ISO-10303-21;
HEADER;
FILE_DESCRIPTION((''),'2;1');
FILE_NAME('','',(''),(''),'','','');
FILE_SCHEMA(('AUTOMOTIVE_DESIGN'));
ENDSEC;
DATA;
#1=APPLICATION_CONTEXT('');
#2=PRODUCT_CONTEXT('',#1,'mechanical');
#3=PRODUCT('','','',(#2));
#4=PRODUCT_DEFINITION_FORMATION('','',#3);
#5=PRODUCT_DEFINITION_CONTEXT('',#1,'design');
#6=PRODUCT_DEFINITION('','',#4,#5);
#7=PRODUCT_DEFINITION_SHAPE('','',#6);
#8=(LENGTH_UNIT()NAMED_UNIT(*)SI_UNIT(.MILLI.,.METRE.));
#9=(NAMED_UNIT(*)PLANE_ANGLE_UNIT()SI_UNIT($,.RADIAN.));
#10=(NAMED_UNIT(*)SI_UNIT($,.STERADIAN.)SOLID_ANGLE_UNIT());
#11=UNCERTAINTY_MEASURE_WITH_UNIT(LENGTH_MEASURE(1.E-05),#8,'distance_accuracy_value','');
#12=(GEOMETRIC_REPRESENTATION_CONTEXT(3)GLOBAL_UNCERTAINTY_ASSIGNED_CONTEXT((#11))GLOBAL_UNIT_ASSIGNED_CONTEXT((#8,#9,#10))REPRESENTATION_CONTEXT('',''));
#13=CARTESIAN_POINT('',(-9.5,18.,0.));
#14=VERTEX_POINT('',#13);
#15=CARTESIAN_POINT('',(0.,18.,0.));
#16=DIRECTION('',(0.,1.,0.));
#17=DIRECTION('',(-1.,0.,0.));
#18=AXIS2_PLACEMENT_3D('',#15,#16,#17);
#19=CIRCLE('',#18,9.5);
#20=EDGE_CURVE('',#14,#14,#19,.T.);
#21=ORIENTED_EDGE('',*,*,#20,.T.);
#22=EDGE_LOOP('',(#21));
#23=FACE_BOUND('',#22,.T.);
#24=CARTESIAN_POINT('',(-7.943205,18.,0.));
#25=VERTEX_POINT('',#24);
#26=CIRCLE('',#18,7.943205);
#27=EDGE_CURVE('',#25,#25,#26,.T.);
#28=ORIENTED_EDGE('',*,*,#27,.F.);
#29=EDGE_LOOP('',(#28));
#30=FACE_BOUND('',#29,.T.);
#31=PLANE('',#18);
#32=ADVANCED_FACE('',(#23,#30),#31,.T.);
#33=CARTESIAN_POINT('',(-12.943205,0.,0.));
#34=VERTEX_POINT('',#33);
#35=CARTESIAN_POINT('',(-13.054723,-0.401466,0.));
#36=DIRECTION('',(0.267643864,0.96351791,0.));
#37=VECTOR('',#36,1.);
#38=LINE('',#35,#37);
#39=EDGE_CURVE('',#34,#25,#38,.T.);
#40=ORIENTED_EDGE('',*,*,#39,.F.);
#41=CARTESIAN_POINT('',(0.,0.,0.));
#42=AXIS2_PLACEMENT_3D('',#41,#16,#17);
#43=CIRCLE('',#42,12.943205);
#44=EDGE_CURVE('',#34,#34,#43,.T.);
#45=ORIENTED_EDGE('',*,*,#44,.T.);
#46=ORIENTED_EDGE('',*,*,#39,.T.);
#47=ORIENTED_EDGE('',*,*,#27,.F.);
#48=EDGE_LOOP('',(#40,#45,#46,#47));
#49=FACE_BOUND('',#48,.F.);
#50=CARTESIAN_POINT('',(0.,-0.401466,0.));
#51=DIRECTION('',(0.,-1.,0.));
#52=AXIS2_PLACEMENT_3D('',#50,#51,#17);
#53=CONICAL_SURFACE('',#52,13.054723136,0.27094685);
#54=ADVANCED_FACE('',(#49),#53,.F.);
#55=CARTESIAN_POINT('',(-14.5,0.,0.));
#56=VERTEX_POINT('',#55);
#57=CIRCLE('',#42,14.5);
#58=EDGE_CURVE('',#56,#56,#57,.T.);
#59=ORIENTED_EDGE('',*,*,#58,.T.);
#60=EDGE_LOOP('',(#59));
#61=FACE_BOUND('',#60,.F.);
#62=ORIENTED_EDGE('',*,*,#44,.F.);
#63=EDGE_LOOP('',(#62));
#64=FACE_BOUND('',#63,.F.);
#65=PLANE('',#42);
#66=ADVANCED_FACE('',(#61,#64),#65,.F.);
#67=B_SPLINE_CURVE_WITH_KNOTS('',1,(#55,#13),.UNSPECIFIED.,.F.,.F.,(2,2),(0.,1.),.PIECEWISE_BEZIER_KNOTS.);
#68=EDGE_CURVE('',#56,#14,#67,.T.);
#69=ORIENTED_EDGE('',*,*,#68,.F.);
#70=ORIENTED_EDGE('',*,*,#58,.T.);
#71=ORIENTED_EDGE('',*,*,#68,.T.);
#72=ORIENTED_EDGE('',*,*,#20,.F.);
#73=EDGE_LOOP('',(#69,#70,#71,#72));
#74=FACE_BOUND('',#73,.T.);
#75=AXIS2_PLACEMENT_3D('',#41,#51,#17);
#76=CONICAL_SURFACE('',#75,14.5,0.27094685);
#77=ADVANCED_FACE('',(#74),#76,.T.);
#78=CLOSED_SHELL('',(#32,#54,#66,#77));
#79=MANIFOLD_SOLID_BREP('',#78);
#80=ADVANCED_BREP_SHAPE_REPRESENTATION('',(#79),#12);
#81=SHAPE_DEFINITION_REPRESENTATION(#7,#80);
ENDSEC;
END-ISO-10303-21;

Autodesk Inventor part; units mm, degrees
ref_plane "YZ Plane" through (0, 0, 0) normal (1, 0, 0) x (0, 1, 0)
ref_plane "XY Plane" through (0, 0, 0) normal (0, 0, 1) x (1, 0, 0)
sketch "Szkic6" plane through (0, 0, 0) normal (0, 1, 0) x (-1, 0, 0)
  circle A0 centre (0, 0) radius 14.5
  dimension "d33" = 29
ref_plane "Płaszczyzna konstrukcyjna1" through (0, 18, 0) normal (0, 1, 0) x (-1, 0, 0)
sketch "Szkic7" plane through (0, 18, 0) normal (0, 1, 0) x (-1, 0, 0)
  circle A0 centre (0, 0) radius 9.5
  dimension "d35" = 19
loft "Wyciągnięcie złożone1" add profiles "Szkic6", "Szkic7"
shell "Skorupa1" thickness 1.5 removed faces 2 at (0.3595, 18, 2.9609) at (1.052, 0, -3.5603)
equation "\"d33\" = OD1"
equation "\"d35\" = OD2"
equation "\"d52\" = THK"
equation "\"SzerokośćGięciaPodcięcia\" = Grubość"
equation "\"RozmiarPodcięciaNarożnika\" = 4 * Grubość"
equation "\"PromieńPrzejścia\" = PromieńGięcia"
equation "\"Rozmiar_promienia_Jacobiego\" = PromieńGięcia"
equation "\"Wielk_odstępu\" = Grubość"
equation "\"d2\" = PromieńGięcia"
equation "\"d23\" = PromieńGięcia"
equation "\"OD1\" = 29"
equation "\"OD2\" = 19"
equation "\"L\" = 18"
equation "\"THK\" = 1.5"
equation "\"d34\" = L"
equation "\"Grubość\" = 1.5"
equation "\"PromieńGięcia\" = 3"
properties part number "Redukcja symetryczna Ø29x19x1,5 L=18" material "304"
